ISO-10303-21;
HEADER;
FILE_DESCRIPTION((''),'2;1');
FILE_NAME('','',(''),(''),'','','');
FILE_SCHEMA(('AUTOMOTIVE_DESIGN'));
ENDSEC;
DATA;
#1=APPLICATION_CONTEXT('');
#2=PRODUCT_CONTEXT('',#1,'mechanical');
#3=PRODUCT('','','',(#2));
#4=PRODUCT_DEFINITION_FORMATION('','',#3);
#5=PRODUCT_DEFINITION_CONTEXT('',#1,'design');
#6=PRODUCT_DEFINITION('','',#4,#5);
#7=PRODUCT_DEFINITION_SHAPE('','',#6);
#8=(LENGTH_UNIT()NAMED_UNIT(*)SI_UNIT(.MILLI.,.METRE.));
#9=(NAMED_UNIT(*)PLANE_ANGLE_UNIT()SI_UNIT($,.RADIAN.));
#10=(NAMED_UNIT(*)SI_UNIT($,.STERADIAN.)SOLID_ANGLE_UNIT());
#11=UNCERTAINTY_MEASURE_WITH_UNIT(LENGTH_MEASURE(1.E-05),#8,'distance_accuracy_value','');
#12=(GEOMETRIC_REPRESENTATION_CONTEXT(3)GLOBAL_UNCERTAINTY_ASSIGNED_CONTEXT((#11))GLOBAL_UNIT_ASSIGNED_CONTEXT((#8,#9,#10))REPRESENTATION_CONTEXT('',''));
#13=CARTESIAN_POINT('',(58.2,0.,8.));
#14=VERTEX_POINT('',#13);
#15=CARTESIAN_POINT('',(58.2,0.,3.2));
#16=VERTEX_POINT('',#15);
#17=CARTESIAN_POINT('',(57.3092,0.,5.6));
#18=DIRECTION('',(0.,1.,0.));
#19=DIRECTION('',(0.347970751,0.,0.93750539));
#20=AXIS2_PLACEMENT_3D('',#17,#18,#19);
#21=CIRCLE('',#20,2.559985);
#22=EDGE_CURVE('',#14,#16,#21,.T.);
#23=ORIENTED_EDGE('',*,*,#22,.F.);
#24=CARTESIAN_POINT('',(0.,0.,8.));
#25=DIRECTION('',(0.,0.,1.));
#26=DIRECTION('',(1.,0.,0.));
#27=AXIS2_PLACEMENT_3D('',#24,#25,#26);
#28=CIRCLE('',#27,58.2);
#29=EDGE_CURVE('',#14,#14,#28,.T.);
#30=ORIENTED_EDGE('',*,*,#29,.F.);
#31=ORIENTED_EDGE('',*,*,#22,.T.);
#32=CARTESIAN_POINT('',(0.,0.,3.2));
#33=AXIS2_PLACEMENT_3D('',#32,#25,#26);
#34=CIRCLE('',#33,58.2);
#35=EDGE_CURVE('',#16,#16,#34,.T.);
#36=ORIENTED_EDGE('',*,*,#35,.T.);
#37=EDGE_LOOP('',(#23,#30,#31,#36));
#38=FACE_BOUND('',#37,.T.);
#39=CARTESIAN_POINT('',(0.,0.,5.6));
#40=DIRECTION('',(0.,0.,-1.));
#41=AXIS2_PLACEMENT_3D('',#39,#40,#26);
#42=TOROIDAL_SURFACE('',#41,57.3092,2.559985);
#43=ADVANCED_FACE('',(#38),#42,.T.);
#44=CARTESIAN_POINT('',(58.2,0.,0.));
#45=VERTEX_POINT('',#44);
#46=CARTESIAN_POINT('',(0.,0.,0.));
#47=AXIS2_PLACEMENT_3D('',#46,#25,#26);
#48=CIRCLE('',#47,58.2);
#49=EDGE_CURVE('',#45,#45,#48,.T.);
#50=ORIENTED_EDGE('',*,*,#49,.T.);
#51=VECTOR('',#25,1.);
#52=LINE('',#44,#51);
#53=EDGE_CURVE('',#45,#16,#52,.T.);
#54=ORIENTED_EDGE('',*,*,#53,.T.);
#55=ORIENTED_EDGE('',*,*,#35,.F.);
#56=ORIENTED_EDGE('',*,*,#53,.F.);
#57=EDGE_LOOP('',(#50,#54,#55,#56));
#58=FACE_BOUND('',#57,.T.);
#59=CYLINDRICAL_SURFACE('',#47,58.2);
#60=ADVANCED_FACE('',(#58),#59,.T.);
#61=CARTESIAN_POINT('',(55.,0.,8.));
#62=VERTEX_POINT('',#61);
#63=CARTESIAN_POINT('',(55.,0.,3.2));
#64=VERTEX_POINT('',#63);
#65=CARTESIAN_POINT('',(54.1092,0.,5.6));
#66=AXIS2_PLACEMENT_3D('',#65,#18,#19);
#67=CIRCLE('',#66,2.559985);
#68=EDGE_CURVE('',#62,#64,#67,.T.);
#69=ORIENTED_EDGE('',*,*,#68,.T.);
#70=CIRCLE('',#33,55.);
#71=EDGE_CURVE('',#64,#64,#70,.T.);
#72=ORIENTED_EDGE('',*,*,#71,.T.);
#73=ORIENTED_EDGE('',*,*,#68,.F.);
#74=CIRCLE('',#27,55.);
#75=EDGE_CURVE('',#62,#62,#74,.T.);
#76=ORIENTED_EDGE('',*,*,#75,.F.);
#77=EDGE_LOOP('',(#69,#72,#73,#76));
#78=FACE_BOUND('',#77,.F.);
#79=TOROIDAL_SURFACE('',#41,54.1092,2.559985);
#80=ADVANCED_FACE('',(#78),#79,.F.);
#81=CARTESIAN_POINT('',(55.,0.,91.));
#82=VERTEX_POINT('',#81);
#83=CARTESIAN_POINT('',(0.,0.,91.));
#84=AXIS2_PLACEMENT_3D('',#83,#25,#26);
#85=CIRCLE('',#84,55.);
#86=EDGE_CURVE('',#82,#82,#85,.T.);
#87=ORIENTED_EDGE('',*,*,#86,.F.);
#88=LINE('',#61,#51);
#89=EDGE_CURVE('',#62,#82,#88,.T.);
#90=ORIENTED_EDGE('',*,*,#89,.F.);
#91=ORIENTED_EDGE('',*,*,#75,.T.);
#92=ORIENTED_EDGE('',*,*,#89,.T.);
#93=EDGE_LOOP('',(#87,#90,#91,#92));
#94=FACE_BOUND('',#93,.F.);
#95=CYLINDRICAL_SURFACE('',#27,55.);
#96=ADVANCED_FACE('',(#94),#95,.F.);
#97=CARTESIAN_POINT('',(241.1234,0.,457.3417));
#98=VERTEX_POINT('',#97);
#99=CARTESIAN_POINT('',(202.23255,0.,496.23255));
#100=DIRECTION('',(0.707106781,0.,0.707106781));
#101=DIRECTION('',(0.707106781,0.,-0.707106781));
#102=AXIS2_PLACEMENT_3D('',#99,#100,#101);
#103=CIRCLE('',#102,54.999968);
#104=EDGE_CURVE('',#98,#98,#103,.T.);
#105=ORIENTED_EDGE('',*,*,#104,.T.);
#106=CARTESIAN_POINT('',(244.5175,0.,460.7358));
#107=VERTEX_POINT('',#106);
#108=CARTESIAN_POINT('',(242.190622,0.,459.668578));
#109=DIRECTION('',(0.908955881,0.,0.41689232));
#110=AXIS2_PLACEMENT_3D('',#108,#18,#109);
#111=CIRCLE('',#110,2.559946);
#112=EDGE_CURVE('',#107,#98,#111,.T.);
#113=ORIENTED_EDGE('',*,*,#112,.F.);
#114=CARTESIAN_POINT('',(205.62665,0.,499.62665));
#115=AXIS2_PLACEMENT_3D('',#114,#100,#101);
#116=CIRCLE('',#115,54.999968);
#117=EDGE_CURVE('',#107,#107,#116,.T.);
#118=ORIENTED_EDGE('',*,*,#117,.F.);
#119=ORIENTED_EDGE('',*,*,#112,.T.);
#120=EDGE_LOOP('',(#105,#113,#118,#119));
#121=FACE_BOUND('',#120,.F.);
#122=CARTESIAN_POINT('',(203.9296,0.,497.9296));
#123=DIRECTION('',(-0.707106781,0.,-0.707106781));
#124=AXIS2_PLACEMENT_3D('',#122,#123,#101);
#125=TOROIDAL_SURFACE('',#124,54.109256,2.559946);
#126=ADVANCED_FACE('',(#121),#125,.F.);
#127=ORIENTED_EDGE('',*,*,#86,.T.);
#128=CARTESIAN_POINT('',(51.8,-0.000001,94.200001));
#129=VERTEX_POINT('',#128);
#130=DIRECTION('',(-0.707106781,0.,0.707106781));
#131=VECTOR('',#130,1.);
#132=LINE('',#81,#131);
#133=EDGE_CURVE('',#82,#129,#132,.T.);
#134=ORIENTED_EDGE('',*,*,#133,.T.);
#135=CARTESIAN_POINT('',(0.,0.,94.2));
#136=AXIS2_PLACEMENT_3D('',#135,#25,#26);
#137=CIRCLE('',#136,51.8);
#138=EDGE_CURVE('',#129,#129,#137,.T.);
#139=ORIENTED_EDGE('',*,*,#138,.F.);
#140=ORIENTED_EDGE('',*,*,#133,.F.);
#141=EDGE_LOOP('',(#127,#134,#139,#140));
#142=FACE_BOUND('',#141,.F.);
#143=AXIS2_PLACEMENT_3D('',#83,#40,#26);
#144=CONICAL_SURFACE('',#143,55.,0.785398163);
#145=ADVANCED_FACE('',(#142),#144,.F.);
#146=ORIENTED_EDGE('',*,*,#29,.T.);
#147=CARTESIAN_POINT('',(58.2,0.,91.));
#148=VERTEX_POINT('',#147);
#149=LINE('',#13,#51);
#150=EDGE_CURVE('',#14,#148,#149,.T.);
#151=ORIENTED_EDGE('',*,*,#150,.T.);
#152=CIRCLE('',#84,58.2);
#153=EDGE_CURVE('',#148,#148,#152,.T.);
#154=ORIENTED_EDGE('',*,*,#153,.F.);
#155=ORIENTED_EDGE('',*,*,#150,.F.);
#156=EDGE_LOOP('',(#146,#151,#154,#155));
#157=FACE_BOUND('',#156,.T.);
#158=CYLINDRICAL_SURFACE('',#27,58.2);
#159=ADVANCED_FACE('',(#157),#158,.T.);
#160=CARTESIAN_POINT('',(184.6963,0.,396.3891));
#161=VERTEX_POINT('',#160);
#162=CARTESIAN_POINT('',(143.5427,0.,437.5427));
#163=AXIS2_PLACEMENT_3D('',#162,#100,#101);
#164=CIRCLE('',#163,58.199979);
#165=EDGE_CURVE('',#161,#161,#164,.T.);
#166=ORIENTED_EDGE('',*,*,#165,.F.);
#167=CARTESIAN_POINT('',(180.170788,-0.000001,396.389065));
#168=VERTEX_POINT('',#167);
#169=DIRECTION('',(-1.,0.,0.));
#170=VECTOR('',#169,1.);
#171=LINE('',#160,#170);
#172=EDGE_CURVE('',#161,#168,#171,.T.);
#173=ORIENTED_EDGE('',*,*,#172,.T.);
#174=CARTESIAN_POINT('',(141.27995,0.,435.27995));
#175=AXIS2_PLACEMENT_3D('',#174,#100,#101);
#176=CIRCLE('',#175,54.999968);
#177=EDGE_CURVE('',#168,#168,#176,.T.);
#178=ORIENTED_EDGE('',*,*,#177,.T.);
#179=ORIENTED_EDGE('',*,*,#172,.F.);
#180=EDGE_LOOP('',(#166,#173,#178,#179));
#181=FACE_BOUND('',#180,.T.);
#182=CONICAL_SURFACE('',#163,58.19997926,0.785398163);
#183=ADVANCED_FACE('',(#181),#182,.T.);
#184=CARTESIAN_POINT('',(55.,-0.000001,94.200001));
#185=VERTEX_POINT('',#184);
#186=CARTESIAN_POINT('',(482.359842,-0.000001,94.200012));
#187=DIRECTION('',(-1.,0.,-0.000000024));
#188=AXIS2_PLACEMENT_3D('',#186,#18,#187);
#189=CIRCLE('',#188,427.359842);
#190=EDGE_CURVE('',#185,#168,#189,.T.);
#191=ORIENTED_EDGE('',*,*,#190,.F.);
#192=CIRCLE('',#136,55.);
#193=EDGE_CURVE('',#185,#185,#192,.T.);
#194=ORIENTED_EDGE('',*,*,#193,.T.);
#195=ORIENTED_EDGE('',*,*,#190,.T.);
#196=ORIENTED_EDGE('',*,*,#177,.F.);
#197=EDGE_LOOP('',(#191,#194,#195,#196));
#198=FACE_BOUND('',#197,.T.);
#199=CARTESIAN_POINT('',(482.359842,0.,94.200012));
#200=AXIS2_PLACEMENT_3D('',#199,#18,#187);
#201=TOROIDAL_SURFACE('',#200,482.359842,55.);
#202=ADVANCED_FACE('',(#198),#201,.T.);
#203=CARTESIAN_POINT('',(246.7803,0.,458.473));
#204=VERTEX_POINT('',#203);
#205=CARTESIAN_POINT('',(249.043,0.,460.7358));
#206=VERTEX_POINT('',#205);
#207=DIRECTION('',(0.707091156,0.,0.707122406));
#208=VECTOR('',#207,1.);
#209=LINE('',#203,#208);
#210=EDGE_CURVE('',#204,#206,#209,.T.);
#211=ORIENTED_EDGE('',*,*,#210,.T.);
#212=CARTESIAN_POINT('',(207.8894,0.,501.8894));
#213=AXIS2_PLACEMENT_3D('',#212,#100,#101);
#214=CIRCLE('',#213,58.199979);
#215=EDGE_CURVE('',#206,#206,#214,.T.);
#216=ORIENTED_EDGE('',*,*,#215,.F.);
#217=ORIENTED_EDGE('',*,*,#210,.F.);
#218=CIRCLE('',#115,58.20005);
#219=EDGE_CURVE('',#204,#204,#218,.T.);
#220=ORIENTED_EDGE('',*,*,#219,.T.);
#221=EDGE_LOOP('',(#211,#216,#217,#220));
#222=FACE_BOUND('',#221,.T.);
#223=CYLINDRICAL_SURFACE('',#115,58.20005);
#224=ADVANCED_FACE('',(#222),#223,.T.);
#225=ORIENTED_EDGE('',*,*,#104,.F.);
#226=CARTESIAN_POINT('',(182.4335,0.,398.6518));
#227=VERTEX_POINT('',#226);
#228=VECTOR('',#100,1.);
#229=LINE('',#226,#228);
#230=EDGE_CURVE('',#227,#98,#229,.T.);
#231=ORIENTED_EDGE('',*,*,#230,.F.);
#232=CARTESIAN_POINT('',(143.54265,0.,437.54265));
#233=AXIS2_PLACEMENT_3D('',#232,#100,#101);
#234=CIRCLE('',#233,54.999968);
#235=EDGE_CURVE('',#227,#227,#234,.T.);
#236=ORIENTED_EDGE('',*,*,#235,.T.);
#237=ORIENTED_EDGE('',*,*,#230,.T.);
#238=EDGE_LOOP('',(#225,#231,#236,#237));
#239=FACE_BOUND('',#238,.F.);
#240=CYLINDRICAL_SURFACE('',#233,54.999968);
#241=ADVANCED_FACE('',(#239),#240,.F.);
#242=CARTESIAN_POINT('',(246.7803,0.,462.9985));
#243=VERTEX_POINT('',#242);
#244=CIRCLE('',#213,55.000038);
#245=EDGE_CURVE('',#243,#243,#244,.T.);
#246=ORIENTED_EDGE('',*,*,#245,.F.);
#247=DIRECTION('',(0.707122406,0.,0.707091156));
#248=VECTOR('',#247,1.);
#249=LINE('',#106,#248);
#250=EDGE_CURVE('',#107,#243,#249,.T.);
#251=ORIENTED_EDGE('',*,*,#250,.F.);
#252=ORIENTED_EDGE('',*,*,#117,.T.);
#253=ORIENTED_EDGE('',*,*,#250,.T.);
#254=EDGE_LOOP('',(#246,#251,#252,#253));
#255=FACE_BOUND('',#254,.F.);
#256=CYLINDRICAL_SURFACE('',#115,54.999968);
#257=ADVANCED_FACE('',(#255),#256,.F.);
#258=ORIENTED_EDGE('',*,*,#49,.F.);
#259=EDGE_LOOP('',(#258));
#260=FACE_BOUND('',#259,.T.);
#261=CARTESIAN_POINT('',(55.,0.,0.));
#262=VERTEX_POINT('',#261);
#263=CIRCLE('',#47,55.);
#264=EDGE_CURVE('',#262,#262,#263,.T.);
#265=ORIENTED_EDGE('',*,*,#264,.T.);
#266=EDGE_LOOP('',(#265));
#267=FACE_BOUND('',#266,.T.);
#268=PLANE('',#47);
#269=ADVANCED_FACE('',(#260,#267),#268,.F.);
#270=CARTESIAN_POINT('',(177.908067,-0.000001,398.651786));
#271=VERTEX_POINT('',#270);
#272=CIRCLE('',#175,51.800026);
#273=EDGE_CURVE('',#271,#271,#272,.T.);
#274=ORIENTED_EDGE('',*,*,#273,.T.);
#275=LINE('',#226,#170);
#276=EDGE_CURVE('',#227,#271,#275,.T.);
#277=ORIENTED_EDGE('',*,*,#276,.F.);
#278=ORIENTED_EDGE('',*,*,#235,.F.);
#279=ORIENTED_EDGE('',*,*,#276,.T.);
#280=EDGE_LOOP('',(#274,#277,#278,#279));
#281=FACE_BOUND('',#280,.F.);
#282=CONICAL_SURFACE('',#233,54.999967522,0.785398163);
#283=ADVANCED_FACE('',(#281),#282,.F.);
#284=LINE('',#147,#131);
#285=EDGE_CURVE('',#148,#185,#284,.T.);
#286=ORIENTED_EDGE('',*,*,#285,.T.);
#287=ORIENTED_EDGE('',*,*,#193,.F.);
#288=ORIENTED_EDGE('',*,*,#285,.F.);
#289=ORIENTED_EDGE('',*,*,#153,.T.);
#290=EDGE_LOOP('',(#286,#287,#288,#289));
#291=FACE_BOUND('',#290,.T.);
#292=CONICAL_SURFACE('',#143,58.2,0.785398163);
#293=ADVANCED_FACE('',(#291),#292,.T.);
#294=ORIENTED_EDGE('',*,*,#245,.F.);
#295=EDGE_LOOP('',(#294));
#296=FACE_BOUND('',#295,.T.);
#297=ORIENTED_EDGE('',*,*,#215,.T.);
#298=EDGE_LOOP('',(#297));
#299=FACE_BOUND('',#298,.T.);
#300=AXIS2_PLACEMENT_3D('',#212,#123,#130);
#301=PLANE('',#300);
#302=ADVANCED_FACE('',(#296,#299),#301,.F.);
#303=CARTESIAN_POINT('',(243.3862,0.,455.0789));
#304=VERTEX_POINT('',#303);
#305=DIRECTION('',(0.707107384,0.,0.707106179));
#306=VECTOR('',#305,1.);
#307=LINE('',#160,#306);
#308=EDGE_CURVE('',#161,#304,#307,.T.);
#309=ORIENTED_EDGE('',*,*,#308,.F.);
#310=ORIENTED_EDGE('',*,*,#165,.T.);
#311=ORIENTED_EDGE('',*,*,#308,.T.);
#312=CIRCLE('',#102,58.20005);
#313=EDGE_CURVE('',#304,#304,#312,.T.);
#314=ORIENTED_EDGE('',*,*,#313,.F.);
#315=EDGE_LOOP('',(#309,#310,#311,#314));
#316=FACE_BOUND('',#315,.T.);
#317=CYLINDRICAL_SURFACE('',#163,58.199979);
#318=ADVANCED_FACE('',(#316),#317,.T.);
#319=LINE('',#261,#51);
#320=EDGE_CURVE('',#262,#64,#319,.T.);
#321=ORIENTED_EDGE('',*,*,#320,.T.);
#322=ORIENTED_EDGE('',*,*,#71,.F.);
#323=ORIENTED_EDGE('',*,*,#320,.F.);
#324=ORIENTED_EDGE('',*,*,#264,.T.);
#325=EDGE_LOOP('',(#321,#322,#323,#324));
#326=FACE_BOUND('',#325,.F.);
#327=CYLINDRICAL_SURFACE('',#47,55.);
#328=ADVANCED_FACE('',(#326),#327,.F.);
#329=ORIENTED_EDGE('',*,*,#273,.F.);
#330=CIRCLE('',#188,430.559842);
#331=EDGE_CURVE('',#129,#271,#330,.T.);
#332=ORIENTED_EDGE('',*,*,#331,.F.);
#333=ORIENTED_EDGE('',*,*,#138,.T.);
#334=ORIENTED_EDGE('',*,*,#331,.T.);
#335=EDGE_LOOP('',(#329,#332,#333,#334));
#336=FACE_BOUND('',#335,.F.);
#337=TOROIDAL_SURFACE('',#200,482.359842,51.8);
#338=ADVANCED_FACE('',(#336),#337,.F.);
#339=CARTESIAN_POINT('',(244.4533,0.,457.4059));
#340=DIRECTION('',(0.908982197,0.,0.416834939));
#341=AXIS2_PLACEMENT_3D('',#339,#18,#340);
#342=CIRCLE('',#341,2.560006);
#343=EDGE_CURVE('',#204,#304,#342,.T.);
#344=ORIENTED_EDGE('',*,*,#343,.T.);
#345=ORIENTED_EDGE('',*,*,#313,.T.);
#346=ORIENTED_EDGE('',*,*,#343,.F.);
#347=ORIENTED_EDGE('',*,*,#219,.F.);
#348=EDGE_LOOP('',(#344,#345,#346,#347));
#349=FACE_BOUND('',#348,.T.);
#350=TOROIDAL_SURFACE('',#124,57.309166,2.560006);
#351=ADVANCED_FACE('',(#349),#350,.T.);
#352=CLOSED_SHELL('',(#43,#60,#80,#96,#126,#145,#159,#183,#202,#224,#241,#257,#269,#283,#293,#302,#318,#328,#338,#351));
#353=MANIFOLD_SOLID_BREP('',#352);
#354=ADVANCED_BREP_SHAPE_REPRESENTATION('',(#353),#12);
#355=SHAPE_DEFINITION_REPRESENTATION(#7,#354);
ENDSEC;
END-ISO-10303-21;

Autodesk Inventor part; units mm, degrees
ref_plane "YZ Plane" through (0, 0, 0) normal (1, 0, 0) x (0, 1, 0)
ref_plane "XZ Plane" through (0, 0, 0) normal (0, 1, 0) x (-1, 0, 0)
ref_plane "XY Plane" through (0, 0, 0) normal (0, 0, 1) x (1, 0, 0)
sketch "Sketch1" plane through (0, 0, 0) normal (0, 1, 0) x (-1, 0, 0)
  line L0 (0, 0) -> (0, 91)
  line L1 (0, 0) -> (-55, 0) construction
  line L2 (-55, 0) -> (-55, 3.2)
  line L3 (-55, 3.2) -> (-55, 8) construction
  line L4 (-55, 8) -> (-55, 91)
  line L5 (-55, 91) -> (0, 91) construction
  line L6 (-55, 0) -> (-58.2, 0)
  line L7 (-58.2, 0) -> (-58.2, 3.2)
  line L8 (-58.2, 3.2) -> (-58.2, 8) construction
  line L9 (-58.2, 8) -> (-58.2, 91)
  line L10 (-58.2, 91) -> (-55, 91) construction
  line L11 (-58.2, 8) -> (-55, 8) construction
  line L12 (-58.2, 3.2) -> (-55, 3.2) construction
  line L13 (0, 91) -> (0, 294) construction
  line L14 (0, 294) -> (-143.5427, 437.5427) construction
  line L15 (-143.5427, 437.5427) -> (-182.4335, 398.6518) construction
  line L16 (-182.4335, 398.6518) -> (-184.6963, 396.3891) construction
  line L17 (-184.6963, 396.3891) -> (-243.3862, 455.0789)
  line L18 (-243.3862, 455.0789) -> (-246.7803, 458.473) construction
  line L19 (-246.7803, 458.473) -> (-249.043, 460.7358)
  line L20 (-243.3862, 455.0789) -> (-241.1234, 457.3417) construction
  line L21 (-246.7803, 458.473) -> (-244.5175, 460.7358) construction
  line L22 (-249.043, 460.7358) -> (-246.7803, 462.9985)
  line L23 (-182.4335, 398.6518) -> (-241.1234, 457.3417)
  line L24 (-244.5175, 460.7358) -> (-246.7803, 462.9985)
  line L25 (-244.5175, 460.7358) -> (-241.1234, 457.3417) construction
  line L26 (-143.5427, 437.5427) -> (-207.8894, 501.8894) construction
  line L27 (-246.7803, 462.9985) -> (-207.8894, 501.8894) construction
  arc A0 (-244.5175, 460.7358) -> (-241.1234, 457.3417) centre (-242.1905, 459.6686) ccw
  arc A1 (-246.7803, 458.473) -> (-243.3862, 455.0789) centre (-244.4533, 457.4059) ccw
  arc A2 (-55, 8) -> (-55, 3.2) centre (-54.1092, 5.6) ccw
  arc A3 (-58.2, 8) -> (-58.2, 3.2) centre (-57.3092, 5.6) ccw
  line L28 (-55, 91) -> (-51.8, 94.2)
  line L29 (-58.2, 91) -> (-55, 94.2)
  line L30 (-55, 91) -> (-55, 94.2) construction
  line L31 (-55, 94.2) -> (-51.8, 94.2)
  line L32 (-51.8, 94.2) -> (0, 94.2) construction
  line L33 (-182.4335, 398.6518) -> (-180.1708, 396.3891) construction
  line L34 (-184.6963, 396.3891) -> (-180.1708, 396.3891)
  line L35 (-182.4335, 398.6518) -> (-177.9081, 398.6518)
  line L36 (-180.1708, 396.3891) -> (-177.9081, 398.6518)
  line L37 (-177.9081, 398.6518) -> (-141.2799, 435.2799) construction
  line L38 (-141.2799, 435.2799) -> (-482.3599, 94.2) construction
  line L39 (0, 94.2) -> (-482.3599, 94.2) construction
  arc A4 (0, 94.2) -> (-141.2799, 435.2799) centre (-482.3599, 94.2) ccw
  dimension "d0" = 91
  dimension "d1" = 110
  dimension "d2" = 3.2
  dimension "d3" = 3.2
  dimension "d4" = 4.8
  dimension "d5" = 45
  dimension "d6" = 91
  dimension "d7" = 3.2
  dimension "d8" = 4.8
  dimension "d9" = 110
  dimension "d10" = 3.2
  dimension "d11" = 203
  dimension "d12" = 203
  dimension "d13" = 2.56
  dimension "d14" = 3.2
  dimension "d16" = 3.2
revolve "Revolve1" add sketch "Sketch1" angle 360 about axis through (143.5427, 0, 437.5427) along (0.7071068, 0, 0.7071068) contours L17 A1 L19 L22 L24 A0 L23 L35 L36 L34
revolve "Revolve2" add sketch "Sketch1" angle 360 about axis through (0, 0, 0) along (0, 0, 1) contours L6 L7 A3 L9 L29 L31 L28 L4 A2 L2
sketch "Sketch2" plane through (0, 0, 94.2) normal (0, 0, 1) x (1, 0, 0)
  circle A0 centre (0, 0) radius 51.8 projected
  circle A1 centre (0, 0) radius 55 projected
sweep "Sweep3" add profiles "Sketch2" path "Sketch1" path curves A4
equation "\"d0\" = tk"
equation "\"d1\" = d"
equation "\"d2\" = s1"
equation "\"d3\" = s1"
equation "\"d4\" = 1.5 * s1"
equation "\"d6\" = tk"
equation "\"d7\" = s1"
equation "\"d8\" = 1.5 * s1"
equation "\"d9\" = d"
equation "\"d10\" = s1"
equation "\"d11\" = Zk"
equation "\"d12\" = Zk"
equation "\"d13\" = 0.8 * s1"
equation "\"d14\" = s1"
equation "\"d16\" = s1"
equation "\"Zk\" = 203"
equation "\"tk\" = 91"
equation "\"d\" = 110"
equation "\"s1\" = 3.2"
properties part number "DIN 8063 Двойная подвижная соединительная муфта с изгибом 45 градусов, цельная - MMK - KS 110 - 3" material "ПВХ, непластифицированный"
